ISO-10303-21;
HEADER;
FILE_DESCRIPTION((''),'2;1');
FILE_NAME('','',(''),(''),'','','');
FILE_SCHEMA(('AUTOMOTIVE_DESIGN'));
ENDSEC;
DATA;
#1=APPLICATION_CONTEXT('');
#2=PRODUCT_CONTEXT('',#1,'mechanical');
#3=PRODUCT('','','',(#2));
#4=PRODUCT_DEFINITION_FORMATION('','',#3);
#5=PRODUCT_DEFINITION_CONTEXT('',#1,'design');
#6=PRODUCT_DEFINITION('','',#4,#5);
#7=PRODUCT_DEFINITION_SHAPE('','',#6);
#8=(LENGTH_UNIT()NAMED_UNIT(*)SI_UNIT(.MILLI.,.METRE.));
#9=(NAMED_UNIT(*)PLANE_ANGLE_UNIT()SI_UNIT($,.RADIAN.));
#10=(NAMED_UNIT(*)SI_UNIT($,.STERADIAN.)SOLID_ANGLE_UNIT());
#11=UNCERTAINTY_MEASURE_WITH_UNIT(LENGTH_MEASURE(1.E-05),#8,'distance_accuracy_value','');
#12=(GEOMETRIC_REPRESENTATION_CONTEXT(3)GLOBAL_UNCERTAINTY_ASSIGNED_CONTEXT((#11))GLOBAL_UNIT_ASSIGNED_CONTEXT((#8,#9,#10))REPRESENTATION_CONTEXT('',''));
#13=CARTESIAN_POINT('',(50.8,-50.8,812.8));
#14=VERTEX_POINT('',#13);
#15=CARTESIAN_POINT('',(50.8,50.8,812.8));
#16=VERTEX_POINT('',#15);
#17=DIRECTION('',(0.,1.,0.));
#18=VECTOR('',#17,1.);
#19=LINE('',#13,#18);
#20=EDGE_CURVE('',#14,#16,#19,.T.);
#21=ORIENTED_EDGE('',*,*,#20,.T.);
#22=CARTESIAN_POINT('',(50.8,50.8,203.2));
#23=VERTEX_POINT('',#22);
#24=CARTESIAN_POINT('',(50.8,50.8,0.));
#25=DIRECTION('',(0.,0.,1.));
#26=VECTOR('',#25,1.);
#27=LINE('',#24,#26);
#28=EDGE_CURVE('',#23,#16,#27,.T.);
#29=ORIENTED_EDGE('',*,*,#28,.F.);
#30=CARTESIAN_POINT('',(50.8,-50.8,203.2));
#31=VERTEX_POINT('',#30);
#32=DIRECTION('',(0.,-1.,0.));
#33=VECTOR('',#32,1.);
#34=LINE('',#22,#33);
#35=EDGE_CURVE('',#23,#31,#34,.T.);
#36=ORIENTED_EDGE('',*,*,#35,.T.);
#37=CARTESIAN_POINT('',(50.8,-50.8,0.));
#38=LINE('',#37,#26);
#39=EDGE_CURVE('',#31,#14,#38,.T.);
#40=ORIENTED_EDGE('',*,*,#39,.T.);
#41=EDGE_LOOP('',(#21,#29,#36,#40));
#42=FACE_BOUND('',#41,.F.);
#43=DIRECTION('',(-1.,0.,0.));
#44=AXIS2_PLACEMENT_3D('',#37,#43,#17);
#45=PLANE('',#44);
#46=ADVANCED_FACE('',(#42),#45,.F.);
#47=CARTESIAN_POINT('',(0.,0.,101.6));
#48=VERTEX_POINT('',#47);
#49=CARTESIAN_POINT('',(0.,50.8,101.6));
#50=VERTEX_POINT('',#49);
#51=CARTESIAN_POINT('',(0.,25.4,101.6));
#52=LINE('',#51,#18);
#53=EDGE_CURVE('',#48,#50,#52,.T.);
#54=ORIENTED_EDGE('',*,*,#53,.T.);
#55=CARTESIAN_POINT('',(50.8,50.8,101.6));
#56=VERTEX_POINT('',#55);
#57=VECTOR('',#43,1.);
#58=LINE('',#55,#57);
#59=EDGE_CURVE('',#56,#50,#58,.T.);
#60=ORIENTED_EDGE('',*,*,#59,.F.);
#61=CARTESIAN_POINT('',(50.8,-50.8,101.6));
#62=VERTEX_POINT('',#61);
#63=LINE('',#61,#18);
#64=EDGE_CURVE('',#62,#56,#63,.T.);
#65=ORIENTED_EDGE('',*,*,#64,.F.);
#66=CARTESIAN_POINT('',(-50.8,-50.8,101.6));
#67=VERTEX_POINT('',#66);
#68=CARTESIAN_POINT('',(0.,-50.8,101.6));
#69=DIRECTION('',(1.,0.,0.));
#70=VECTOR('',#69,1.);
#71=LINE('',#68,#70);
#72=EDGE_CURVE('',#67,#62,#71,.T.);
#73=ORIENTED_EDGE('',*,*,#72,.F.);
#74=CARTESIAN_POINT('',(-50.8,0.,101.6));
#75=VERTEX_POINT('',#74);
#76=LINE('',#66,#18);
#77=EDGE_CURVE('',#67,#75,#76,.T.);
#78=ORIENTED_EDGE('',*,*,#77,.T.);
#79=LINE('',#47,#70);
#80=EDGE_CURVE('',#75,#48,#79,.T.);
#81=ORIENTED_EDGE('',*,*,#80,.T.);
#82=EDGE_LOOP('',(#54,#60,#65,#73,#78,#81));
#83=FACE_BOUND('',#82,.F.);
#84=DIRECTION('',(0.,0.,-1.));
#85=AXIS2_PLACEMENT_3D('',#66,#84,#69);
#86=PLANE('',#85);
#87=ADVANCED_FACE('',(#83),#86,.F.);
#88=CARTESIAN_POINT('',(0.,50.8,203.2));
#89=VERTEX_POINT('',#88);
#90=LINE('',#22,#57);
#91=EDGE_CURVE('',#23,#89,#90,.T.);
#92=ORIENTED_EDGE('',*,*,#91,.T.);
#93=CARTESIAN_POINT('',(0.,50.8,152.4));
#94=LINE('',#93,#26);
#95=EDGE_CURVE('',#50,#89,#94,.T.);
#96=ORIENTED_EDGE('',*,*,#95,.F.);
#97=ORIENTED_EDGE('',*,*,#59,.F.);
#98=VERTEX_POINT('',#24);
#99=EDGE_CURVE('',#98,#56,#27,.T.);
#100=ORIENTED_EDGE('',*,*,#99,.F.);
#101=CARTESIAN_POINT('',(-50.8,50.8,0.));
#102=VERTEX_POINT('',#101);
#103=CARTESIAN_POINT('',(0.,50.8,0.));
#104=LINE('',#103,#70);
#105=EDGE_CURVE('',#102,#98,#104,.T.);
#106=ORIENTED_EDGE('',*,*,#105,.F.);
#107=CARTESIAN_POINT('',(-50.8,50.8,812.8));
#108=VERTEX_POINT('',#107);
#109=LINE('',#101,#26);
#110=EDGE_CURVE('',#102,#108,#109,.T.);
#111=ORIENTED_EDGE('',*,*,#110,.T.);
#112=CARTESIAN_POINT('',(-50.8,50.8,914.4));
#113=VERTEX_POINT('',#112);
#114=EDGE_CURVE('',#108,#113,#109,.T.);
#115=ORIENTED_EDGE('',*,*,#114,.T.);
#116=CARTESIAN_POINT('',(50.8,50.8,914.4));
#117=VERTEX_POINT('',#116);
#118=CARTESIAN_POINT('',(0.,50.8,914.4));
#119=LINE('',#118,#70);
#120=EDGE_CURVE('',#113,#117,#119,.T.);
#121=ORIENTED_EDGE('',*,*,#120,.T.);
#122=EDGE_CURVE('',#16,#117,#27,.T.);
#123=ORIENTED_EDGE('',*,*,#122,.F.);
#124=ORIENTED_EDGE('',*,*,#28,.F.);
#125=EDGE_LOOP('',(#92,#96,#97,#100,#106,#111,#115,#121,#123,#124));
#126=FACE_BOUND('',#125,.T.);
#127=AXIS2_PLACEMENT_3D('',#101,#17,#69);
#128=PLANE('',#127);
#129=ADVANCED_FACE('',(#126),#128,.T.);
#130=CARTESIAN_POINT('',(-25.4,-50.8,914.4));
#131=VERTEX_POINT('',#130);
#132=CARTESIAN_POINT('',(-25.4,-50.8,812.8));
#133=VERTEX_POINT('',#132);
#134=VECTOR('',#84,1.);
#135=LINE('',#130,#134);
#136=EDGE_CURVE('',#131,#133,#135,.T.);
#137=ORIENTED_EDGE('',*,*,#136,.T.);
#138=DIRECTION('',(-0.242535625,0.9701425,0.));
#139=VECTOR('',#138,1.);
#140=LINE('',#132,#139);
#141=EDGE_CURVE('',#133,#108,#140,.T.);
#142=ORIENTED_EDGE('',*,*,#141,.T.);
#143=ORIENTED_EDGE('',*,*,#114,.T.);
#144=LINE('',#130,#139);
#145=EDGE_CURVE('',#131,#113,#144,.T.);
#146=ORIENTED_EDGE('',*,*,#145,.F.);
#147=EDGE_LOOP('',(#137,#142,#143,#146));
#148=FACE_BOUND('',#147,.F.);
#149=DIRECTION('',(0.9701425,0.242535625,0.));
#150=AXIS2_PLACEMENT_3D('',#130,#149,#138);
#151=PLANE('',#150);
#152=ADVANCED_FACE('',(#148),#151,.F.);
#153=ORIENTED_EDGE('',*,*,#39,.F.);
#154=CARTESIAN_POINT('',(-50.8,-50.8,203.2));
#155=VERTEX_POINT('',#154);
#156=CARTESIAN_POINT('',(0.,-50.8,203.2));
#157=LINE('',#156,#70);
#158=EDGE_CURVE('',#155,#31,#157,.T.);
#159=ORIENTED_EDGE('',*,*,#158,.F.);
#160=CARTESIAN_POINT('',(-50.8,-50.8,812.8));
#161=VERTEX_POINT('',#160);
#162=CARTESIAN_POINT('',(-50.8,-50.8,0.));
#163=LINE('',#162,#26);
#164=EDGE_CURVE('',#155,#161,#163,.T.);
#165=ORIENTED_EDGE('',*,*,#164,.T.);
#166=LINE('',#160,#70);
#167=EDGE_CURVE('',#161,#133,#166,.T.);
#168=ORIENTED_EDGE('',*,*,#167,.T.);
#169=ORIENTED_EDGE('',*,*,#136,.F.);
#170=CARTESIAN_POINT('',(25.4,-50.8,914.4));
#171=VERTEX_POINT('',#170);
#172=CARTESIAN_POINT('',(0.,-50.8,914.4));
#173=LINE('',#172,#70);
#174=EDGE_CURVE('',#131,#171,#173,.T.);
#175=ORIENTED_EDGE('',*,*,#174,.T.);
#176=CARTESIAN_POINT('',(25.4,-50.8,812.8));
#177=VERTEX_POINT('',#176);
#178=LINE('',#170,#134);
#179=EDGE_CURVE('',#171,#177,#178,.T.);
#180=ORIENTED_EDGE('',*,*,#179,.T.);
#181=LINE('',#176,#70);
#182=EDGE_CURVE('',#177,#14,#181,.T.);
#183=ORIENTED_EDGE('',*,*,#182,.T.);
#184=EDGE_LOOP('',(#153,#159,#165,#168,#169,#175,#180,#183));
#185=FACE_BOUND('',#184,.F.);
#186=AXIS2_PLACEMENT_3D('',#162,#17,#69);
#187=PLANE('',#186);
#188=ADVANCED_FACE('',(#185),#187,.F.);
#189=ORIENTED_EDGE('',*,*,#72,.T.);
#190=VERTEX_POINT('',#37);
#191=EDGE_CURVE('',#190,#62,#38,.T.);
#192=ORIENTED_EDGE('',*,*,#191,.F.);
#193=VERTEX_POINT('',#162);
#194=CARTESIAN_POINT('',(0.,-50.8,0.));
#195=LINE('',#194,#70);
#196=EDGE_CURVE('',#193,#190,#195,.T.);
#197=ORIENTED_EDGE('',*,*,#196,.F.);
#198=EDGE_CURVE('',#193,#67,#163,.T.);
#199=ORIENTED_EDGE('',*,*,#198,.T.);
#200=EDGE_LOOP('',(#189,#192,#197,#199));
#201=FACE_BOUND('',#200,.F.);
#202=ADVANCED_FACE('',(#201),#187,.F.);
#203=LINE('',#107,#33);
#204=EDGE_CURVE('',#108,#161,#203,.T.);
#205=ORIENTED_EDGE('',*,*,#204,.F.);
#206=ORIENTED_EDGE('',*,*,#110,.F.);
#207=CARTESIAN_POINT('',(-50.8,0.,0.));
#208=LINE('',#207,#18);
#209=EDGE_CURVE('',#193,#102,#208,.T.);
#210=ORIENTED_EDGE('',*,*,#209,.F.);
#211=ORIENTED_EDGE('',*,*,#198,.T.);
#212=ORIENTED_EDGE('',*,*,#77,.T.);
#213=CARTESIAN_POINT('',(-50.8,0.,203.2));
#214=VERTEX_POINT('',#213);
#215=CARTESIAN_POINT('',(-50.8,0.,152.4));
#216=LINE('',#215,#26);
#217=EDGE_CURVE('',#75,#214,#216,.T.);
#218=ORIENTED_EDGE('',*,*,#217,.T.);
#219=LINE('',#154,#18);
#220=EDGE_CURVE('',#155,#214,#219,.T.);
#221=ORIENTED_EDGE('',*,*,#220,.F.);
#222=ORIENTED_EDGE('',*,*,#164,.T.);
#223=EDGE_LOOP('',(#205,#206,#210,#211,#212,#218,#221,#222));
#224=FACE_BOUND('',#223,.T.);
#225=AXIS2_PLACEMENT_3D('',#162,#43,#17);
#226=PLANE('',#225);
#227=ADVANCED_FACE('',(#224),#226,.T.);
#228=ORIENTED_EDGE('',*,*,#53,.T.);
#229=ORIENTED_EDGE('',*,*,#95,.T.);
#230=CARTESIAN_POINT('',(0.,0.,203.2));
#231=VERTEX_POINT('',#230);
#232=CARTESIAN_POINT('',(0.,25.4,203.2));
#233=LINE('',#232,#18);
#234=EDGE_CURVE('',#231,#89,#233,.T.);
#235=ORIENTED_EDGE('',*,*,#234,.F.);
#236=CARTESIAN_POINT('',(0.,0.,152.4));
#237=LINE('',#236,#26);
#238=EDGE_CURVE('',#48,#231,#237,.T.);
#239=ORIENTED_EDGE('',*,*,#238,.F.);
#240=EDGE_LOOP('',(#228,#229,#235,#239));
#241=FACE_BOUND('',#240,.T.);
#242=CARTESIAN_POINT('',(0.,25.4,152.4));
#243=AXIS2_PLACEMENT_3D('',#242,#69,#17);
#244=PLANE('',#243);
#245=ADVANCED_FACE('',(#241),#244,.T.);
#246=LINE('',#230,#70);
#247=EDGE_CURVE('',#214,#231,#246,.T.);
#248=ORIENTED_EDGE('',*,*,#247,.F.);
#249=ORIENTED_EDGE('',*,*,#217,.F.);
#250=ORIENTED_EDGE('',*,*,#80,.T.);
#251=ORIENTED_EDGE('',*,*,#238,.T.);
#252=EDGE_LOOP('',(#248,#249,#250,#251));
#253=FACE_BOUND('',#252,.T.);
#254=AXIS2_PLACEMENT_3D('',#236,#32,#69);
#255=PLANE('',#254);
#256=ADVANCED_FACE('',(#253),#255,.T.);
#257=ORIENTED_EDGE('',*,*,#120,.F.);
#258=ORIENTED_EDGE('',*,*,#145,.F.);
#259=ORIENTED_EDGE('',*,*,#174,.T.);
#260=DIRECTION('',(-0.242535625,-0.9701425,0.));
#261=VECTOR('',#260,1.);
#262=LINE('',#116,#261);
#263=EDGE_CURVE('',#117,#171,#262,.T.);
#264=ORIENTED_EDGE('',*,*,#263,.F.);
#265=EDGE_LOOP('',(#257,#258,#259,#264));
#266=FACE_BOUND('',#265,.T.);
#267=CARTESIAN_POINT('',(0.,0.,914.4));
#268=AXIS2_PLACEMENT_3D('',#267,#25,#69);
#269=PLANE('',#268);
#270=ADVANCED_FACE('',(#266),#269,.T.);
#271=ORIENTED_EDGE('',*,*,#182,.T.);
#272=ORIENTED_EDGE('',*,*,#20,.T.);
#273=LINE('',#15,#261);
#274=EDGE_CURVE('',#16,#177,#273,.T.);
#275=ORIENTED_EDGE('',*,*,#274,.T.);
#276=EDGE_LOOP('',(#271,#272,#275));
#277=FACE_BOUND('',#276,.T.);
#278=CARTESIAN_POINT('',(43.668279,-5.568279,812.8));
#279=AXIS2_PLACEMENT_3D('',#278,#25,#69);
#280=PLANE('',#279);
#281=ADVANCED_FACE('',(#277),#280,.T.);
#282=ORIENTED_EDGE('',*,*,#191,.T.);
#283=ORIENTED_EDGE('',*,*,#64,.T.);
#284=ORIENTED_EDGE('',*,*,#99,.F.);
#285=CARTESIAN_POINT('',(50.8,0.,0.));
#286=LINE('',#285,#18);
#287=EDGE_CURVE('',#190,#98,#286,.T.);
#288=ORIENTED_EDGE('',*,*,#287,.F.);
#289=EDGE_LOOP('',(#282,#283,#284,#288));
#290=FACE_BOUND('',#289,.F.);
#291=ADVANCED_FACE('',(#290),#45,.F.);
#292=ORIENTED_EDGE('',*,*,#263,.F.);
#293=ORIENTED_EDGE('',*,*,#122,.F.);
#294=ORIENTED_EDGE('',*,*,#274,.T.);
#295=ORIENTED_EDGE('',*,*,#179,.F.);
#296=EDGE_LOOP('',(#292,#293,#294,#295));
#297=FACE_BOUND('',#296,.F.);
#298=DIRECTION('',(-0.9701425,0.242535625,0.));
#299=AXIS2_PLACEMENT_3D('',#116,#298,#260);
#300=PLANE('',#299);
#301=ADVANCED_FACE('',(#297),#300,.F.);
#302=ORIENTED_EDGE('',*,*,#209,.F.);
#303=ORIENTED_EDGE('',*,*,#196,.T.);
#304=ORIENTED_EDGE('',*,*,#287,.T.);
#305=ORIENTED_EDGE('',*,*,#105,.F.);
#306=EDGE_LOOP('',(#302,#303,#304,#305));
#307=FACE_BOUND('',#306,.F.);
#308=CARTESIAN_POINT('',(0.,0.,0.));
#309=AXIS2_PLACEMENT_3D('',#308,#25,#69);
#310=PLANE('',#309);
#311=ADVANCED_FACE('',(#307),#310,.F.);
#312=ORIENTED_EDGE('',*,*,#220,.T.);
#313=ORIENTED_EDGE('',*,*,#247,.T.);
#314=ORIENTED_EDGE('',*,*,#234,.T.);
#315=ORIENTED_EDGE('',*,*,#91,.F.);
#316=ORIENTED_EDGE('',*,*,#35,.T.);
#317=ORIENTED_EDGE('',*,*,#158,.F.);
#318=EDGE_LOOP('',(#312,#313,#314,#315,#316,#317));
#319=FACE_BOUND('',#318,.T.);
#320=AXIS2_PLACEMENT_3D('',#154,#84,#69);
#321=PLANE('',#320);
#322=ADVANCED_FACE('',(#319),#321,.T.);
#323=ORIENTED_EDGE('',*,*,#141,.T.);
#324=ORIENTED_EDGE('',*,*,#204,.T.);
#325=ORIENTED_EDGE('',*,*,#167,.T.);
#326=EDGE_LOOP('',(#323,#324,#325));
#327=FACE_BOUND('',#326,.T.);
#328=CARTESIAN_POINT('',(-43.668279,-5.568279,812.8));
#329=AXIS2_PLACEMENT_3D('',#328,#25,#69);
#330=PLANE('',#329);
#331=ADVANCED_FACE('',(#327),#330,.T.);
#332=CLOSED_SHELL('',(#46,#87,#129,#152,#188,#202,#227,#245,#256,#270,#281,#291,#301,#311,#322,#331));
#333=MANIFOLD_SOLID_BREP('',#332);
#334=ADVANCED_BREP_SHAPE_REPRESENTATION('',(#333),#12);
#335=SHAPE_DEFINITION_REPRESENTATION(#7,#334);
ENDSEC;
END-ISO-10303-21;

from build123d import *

# Parameters (mm, degrees)
F0_W     = 101.6
F0_H     = 101.6
F1_DEPTH = 914.4
F3_DEPTH = 101.6
F4_W     = 101.6
F4_H     = 101.6
F5_DEPTH = 50.8
F6_W     = 50.8
F6_H     = 101.6
F7_DEPTH = 50.8


with BuildPart() as f1:
    # F0 (on Top) → F1 (new body)
    with BuildSketch(Plane.XY):
        Rectangle(F0_W, F0_H)
    extrude(amount=F1_DEPTH)

    # F2 (on face) → F3 (cut)
    with BuildSketch(Plane.XY.offset(914.4)):
        Polygon((-25.4, -50.8), (-50.8, 50.8), (-50.8, -50.8), align=None)
        Polygon((50.8, -50.8), (50.8, 50.8), (25.4, -50.8), align=None)
    extrude(amount=-F3_DEPTH, mode=Mode.SUBTRACT)

    # F4 (on face) → F5 (cut)
    with BuildSketch(Plane.XZ.offset(50.8)):
        with Locations((0, 152.4)):
            Rectangle(F4_W, F4_H)
    extrude(amount=-F5_DEPTH, mode=Mode.SUBTRACT)

    # F6 (on face) → F7 (cut)
    with BuildSketch(Plane.YZ.offset(50.8)):
        with Locations((25.4, 152.4)):
            Rectangle(F6_W, F6_H)
    extrude(amount=-F7_DEPTH, mode=Mode.SUBTRACT)


solid = f1.part
